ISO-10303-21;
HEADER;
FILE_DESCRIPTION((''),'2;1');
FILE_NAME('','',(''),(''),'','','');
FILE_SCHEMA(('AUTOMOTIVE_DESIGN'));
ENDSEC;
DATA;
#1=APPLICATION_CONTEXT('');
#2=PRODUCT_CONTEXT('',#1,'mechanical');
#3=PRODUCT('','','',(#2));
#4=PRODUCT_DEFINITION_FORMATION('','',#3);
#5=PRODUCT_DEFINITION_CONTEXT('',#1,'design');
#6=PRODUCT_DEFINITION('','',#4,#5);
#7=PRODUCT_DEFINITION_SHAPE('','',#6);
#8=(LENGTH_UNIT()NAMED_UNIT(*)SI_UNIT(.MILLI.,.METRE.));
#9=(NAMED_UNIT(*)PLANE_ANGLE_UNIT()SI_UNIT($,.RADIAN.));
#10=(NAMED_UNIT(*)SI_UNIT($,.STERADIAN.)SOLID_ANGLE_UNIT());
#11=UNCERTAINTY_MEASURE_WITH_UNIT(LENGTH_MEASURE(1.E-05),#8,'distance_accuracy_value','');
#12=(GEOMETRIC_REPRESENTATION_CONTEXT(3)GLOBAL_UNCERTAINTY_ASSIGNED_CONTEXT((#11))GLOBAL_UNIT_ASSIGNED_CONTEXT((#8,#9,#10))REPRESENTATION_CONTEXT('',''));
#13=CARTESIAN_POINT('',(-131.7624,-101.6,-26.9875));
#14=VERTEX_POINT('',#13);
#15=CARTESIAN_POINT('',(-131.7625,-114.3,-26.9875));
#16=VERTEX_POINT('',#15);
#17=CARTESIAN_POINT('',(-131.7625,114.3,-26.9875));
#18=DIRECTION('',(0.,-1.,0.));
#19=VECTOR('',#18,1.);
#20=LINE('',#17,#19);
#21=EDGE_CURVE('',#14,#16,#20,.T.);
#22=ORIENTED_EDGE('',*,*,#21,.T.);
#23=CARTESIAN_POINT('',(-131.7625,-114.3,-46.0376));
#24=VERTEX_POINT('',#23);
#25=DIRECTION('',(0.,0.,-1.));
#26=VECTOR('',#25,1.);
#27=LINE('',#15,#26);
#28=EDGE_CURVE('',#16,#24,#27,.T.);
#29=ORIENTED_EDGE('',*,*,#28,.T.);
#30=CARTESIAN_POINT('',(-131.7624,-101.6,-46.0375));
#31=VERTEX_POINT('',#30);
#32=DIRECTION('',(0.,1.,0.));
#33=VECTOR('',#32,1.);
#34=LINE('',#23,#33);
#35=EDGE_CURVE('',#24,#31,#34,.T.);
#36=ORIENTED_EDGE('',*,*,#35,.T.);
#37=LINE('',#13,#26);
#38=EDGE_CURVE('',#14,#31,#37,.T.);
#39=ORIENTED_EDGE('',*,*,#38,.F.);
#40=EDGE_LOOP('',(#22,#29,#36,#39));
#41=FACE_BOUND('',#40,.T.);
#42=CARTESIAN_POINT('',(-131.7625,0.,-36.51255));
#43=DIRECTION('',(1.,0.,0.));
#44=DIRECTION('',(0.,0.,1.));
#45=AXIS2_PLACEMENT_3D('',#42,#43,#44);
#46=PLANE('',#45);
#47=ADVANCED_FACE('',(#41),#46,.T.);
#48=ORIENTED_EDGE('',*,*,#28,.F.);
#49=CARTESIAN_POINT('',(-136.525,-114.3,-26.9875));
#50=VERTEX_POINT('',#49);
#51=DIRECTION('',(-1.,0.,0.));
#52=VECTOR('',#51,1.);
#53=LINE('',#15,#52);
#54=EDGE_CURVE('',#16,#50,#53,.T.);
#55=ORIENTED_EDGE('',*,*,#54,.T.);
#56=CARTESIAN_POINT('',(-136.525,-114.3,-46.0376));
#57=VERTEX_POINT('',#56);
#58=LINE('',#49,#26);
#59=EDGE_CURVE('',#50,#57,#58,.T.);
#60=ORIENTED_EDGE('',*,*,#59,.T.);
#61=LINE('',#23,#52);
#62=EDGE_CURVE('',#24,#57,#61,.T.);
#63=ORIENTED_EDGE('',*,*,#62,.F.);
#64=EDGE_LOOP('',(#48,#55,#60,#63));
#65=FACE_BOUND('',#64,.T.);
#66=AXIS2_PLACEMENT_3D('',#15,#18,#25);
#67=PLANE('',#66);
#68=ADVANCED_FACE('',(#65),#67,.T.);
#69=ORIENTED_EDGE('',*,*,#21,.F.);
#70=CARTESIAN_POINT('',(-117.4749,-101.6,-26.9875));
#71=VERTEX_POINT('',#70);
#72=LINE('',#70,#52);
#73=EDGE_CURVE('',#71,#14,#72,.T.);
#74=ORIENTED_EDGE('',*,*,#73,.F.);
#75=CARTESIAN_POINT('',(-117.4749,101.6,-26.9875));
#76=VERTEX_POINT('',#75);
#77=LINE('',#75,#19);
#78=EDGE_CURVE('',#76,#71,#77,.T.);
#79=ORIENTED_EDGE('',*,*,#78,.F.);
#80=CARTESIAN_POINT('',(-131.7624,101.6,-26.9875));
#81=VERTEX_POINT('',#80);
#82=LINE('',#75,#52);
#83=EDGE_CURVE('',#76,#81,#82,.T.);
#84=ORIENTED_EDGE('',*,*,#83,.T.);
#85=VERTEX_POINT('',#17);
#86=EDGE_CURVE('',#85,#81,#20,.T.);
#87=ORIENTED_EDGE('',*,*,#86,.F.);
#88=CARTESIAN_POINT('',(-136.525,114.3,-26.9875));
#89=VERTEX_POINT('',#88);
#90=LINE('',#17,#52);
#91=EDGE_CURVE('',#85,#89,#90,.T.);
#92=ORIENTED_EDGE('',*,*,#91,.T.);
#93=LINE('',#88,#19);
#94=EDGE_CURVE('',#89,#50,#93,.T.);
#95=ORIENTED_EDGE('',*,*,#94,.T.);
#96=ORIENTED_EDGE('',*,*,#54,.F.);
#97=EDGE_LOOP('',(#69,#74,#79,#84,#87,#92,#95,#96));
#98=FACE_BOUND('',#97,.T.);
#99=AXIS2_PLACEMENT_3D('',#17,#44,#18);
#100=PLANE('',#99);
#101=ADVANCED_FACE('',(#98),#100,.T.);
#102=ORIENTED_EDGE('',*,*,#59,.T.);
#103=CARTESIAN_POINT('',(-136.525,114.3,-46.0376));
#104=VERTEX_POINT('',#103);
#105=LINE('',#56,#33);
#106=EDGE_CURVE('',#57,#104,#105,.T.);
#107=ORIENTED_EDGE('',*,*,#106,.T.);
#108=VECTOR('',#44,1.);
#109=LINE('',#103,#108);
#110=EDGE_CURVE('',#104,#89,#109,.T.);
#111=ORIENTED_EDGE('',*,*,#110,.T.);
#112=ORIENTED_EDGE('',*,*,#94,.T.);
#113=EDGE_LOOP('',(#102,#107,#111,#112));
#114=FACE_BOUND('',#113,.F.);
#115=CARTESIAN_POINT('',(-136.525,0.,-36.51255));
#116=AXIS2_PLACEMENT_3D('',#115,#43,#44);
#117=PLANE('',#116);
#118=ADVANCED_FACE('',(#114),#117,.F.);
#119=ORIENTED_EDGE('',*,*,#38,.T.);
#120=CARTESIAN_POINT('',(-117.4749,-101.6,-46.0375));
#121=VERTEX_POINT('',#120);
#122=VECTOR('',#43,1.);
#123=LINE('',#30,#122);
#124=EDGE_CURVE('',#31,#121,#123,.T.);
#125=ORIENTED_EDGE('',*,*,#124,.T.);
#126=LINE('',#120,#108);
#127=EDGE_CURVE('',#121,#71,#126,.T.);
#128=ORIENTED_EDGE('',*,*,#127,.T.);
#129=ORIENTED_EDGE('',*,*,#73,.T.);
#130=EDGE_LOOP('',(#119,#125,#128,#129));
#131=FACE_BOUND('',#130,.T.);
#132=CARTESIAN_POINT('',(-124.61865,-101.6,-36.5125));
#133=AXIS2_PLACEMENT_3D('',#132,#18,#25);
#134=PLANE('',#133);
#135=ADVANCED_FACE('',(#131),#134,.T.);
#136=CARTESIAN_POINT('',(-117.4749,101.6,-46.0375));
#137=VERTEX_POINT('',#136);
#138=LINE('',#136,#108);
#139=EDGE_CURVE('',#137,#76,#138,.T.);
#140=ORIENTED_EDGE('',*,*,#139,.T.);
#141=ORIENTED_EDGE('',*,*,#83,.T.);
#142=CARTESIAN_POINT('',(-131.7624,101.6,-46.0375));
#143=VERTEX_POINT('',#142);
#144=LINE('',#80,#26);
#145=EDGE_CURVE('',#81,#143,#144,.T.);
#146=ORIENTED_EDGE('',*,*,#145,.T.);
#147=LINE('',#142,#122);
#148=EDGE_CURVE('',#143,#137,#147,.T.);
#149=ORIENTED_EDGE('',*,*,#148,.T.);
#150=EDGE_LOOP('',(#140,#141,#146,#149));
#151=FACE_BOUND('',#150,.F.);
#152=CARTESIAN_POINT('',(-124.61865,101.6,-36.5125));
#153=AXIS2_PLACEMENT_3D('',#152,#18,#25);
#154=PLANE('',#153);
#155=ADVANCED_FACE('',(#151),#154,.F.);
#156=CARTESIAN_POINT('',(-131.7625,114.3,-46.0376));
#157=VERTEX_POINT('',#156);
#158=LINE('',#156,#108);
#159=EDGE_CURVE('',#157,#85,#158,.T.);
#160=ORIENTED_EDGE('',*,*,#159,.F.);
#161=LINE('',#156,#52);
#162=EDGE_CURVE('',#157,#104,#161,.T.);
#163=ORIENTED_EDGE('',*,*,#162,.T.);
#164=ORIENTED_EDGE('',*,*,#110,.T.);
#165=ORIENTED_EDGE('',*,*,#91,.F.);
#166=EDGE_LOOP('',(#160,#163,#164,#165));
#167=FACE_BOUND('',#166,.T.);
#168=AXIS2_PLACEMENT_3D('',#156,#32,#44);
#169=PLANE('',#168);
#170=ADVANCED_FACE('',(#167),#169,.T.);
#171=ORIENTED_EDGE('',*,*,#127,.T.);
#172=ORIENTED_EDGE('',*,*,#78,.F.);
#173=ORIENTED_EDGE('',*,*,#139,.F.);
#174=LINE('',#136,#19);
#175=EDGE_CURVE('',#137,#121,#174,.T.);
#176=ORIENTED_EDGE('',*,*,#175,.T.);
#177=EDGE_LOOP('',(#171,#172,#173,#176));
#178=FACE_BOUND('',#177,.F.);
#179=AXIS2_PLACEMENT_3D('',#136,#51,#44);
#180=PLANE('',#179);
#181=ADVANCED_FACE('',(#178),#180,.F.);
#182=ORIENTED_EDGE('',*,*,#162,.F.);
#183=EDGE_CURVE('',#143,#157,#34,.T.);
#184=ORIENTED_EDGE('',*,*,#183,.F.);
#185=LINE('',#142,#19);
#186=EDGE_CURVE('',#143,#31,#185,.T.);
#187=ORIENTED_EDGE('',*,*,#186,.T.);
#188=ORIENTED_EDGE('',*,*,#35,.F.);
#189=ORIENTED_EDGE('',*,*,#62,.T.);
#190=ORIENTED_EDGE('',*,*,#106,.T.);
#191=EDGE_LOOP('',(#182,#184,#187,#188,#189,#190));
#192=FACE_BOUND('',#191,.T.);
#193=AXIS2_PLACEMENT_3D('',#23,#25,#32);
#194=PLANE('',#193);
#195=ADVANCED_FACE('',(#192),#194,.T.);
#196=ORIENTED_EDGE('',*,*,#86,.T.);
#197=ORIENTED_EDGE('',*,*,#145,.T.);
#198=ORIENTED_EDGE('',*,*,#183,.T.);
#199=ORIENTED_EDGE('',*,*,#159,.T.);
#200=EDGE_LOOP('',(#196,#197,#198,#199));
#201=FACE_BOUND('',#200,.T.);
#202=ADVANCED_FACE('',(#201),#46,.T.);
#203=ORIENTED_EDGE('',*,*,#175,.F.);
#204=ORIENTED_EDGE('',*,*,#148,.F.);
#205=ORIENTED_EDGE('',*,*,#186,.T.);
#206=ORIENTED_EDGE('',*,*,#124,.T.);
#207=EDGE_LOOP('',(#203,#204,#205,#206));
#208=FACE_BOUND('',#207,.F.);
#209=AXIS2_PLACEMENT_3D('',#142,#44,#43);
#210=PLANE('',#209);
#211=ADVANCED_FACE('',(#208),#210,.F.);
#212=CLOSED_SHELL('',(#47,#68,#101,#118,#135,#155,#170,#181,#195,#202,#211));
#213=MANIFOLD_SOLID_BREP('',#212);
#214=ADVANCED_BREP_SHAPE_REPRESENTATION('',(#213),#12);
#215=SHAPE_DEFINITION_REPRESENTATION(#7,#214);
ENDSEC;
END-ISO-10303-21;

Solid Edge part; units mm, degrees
sketch "Sketch1" plane through (-70.6437, 101.6, 0) normal (0, -1, 0) x (1, 0, 0)
  line L0 (-61.1187, -46.0375) -> (-46.8312, -46.0375)
  line L1 (-46.8312, -46.0375) -> (-46.8312, -26.9875)
  line L2 (-46.8312, -26.9875) -> (-61.1187, -26.9875)
  line L3 (-61.1187, -26.9875) -> (-61.1187, -46.0375)
  dimension "D1" = 14.2875
  dimension "D2" = 19.05
extrude "Protrusion1" add sketch "Sketch1" along normal up to vertex (203.2 mm away)
sketch "Sketch2" plane through (-131.7625, 0, -34.1313) normal (-1, 0, 0) x (0, -1, 0)
  line L0 (-114.3, 7.1438) -> (114.3, 7.1438)
  line L1 (114.3, 7.1438) -> (114.3, -11.9063)
  line L2 (114.3, -11.9063) -> (-114.3, -11.9063)
  line L3 (-114.3, -11.9063) -> (-114.3, 7.1438)
  dimension "D1" = 12.7
  dimension "D2" = 12.7
extrude "Protrusion2" add sketch "Sketch2" along normal blind 4.7625
